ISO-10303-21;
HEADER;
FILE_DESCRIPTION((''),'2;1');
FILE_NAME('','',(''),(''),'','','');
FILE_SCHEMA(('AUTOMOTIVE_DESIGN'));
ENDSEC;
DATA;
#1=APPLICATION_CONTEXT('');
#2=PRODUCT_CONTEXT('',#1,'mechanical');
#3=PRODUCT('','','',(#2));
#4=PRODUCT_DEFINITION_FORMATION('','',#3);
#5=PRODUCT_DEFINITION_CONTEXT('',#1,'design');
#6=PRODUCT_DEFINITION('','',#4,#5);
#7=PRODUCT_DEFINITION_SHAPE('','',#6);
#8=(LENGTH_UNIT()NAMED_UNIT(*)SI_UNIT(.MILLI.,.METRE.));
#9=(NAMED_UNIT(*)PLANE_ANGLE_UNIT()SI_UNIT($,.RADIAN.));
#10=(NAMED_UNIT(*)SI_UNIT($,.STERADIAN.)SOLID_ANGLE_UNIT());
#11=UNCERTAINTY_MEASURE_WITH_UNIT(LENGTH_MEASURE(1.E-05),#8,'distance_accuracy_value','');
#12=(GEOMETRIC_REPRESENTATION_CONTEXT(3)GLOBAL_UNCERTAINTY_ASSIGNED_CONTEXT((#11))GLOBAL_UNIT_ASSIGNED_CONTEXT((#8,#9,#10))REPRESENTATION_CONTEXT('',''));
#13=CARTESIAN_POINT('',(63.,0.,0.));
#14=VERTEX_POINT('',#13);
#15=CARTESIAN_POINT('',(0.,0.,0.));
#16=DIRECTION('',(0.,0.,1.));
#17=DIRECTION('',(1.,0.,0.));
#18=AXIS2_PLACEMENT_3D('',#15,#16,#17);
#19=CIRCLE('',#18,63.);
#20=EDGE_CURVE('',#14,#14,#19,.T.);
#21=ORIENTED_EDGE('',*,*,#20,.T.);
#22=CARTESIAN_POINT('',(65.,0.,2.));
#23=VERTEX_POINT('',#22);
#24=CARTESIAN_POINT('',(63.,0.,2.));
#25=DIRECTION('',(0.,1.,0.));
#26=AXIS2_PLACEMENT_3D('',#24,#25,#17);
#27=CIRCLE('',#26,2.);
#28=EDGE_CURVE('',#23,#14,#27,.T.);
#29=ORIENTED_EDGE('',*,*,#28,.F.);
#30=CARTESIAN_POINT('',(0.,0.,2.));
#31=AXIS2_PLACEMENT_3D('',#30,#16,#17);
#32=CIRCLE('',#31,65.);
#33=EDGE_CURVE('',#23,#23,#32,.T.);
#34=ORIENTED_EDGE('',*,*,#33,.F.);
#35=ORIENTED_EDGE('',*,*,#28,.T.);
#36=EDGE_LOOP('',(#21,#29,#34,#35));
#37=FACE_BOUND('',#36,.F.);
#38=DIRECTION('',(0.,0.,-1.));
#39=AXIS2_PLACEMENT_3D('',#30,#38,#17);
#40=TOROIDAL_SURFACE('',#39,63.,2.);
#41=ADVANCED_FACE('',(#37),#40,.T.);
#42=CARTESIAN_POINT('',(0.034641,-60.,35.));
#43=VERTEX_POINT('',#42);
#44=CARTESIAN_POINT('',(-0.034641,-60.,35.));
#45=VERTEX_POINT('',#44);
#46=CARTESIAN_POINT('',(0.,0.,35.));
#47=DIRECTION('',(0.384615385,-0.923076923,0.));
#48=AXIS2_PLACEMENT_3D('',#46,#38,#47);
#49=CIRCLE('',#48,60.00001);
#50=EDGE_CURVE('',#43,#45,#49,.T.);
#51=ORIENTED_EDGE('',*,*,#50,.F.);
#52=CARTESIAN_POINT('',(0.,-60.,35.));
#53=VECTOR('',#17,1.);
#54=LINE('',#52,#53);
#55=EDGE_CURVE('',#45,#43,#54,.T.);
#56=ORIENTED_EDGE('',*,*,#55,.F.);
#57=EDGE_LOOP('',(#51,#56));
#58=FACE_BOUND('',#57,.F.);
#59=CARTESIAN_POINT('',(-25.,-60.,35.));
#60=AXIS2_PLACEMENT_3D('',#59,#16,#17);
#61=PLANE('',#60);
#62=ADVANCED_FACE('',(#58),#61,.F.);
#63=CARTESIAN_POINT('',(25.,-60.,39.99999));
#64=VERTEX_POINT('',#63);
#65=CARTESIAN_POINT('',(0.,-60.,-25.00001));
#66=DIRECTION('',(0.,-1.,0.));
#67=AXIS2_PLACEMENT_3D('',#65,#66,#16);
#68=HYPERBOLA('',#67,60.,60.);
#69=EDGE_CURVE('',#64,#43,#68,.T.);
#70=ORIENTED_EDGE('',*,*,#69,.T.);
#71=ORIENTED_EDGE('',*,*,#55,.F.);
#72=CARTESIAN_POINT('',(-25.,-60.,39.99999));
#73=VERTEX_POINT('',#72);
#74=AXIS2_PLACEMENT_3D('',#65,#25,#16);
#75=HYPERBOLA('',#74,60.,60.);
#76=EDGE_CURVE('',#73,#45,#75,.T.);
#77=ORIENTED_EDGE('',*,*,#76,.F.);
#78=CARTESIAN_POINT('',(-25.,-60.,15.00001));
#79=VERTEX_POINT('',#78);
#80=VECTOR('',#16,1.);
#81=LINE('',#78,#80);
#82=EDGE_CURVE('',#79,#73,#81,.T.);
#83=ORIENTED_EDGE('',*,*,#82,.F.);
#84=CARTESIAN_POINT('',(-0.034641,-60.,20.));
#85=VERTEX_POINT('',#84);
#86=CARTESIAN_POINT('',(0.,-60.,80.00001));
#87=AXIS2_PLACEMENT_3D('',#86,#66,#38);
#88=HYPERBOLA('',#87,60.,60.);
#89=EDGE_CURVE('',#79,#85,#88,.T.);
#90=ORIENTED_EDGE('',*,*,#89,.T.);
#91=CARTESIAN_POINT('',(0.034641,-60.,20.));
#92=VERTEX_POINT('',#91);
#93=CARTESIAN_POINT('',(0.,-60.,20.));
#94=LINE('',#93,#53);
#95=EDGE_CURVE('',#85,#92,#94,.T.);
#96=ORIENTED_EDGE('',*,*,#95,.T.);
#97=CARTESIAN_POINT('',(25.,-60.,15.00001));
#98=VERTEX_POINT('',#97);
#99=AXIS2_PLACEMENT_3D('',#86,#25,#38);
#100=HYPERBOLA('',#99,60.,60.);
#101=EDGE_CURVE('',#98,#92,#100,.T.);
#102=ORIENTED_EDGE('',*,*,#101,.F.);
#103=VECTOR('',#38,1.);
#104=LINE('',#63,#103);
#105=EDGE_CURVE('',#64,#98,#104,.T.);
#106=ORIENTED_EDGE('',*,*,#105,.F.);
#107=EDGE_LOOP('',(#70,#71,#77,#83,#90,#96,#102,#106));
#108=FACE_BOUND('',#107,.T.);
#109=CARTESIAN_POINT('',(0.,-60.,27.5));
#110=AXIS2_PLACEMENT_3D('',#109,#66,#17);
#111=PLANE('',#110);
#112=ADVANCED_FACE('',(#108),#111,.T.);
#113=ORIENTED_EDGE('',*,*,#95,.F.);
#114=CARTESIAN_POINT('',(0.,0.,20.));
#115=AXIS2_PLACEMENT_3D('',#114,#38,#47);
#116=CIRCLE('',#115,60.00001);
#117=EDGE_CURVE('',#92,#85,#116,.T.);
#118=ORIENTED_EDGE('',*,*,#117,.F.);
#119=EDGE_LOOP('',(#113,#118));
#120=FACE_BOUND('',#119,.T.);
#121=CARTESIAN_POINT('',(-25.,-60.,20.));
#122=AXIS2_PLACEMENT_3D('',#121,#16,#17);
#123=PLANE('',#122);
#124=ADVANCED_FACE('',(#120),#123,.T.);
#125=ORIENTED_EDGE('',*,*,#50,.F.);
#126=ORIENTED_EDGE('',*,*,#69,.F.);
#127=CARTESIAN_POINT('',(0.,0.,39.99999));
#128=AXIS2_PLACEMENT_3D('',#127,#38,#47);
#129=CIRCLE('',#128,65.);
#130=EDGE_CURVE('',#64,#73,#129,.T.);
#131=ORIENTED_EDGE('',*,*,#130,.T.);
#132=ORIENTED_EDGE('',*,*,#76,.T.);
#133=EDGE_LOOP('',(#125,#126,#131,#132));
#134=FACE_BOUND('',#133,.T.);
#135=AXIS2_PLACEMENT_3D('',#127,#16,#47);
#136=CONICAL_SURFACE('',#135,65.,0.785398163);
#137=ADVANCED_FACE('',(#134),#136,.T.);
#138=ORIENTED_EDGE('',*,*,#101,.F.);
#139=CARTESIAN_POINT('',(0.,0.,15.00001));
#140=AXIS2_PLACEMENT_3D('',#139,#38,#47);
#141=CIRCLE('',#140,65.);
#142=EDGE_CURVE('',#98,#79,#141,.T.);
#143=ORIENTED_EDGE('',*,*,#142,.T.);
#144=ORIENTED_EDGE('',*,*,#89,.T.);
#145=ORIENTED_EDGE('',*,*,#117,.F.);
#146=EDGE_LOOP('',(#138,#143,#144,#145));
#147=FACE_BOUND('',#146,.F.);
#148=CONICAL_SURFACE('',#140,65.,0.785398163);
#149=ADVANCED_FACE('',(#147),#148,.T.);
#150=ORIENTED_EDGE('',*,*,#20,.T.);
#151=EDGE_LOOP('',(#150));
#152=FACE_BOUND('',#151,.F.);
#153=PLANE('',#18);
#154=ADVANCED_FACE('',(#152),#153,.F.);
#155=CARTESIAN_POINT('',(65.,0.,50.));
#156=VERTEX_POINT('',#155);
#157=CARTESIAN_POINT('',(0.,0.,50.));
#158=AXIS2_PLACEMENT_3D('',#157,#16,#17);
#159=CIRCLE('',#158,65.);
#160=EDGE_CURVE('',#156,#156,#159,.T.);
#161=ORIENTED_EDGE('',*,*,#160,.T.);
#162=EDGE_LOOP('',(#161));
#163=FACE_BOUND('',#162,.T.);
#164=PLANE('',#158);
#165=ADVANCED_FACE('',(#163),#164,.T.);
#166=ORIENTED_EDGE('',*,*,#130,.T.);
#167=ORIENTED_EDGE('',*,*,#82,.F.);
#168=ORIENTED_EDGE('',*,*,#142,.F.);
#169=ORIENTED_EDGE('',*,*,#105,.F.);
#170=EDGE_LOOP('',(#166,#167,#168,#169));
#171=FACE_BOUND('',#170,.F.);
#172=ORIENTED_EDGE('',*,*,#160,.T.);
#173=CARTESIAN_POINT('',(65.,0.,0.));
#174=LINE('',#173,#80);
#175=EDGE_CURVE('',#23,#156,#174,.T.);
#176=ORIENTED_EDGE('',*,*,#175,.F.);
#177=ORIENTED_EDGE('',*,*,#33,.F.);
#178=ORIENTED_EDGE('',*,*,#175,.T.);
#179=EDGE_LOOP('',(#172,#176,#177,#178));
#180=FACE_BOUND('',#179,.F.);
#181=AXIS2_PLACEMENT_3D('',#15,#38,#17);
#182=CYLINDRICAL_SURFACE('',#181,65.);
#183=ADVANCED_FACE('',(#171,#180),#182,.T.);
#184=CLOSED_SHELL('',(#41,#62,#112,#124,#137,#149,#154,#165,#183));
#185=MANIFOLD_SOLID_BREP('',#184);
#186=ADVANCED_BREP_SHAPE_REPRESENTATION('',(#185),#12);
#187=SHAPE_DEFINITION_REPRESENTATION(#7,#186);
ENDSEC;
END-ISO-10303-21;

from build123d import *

# Parameters (mm, degrees)
F0_R     = 65
F1_DEPTH = 50
F2_R     = 2
F4_W     = 50
F4_H     = 15
F5_DEPTH = 25
F6_SIZE  = 4.99999


# Not quite as in the source:
# - a fillet or chamfer is up to 0.001 mm smaller than in the source, because OpenCascade refuses the exact size


with BuildPart() as f1:
    # F0 (on Top) → F1 (new body)
    with BuildSketch(Plane.XY):
        Circle(F0_R)
    extrude(amount=F1_DEPTH)

    # F2
    f2_edges = [f1.edges().sort_by_distance(p)[0] for p in [
        (-65, 0, 0),
    ]]
    fillet(f2_edges, radius=F2_R)

    # F4 (on offset) → F5 (cut)
    with BuildSketch(Plane.XZ.offset(60)):
        with Locations((0, 27.5)):
            Rectangle(F4_W, F4_H)
    extrude(amount=F5_DEPTH, mode=Mode.SUBTRACT)

    # F6 (size 5 in the source; OpenCascade refuses exactly that, so slightly less here)
    f6_edges = [f1.edges().sort_by_distance(p)[0] for p in [
        (0, -65, 20),
        (0, -65, 35),
    ]]
    chamfer(f6_edges, length=F6_SIZE)


solid = f1.part
